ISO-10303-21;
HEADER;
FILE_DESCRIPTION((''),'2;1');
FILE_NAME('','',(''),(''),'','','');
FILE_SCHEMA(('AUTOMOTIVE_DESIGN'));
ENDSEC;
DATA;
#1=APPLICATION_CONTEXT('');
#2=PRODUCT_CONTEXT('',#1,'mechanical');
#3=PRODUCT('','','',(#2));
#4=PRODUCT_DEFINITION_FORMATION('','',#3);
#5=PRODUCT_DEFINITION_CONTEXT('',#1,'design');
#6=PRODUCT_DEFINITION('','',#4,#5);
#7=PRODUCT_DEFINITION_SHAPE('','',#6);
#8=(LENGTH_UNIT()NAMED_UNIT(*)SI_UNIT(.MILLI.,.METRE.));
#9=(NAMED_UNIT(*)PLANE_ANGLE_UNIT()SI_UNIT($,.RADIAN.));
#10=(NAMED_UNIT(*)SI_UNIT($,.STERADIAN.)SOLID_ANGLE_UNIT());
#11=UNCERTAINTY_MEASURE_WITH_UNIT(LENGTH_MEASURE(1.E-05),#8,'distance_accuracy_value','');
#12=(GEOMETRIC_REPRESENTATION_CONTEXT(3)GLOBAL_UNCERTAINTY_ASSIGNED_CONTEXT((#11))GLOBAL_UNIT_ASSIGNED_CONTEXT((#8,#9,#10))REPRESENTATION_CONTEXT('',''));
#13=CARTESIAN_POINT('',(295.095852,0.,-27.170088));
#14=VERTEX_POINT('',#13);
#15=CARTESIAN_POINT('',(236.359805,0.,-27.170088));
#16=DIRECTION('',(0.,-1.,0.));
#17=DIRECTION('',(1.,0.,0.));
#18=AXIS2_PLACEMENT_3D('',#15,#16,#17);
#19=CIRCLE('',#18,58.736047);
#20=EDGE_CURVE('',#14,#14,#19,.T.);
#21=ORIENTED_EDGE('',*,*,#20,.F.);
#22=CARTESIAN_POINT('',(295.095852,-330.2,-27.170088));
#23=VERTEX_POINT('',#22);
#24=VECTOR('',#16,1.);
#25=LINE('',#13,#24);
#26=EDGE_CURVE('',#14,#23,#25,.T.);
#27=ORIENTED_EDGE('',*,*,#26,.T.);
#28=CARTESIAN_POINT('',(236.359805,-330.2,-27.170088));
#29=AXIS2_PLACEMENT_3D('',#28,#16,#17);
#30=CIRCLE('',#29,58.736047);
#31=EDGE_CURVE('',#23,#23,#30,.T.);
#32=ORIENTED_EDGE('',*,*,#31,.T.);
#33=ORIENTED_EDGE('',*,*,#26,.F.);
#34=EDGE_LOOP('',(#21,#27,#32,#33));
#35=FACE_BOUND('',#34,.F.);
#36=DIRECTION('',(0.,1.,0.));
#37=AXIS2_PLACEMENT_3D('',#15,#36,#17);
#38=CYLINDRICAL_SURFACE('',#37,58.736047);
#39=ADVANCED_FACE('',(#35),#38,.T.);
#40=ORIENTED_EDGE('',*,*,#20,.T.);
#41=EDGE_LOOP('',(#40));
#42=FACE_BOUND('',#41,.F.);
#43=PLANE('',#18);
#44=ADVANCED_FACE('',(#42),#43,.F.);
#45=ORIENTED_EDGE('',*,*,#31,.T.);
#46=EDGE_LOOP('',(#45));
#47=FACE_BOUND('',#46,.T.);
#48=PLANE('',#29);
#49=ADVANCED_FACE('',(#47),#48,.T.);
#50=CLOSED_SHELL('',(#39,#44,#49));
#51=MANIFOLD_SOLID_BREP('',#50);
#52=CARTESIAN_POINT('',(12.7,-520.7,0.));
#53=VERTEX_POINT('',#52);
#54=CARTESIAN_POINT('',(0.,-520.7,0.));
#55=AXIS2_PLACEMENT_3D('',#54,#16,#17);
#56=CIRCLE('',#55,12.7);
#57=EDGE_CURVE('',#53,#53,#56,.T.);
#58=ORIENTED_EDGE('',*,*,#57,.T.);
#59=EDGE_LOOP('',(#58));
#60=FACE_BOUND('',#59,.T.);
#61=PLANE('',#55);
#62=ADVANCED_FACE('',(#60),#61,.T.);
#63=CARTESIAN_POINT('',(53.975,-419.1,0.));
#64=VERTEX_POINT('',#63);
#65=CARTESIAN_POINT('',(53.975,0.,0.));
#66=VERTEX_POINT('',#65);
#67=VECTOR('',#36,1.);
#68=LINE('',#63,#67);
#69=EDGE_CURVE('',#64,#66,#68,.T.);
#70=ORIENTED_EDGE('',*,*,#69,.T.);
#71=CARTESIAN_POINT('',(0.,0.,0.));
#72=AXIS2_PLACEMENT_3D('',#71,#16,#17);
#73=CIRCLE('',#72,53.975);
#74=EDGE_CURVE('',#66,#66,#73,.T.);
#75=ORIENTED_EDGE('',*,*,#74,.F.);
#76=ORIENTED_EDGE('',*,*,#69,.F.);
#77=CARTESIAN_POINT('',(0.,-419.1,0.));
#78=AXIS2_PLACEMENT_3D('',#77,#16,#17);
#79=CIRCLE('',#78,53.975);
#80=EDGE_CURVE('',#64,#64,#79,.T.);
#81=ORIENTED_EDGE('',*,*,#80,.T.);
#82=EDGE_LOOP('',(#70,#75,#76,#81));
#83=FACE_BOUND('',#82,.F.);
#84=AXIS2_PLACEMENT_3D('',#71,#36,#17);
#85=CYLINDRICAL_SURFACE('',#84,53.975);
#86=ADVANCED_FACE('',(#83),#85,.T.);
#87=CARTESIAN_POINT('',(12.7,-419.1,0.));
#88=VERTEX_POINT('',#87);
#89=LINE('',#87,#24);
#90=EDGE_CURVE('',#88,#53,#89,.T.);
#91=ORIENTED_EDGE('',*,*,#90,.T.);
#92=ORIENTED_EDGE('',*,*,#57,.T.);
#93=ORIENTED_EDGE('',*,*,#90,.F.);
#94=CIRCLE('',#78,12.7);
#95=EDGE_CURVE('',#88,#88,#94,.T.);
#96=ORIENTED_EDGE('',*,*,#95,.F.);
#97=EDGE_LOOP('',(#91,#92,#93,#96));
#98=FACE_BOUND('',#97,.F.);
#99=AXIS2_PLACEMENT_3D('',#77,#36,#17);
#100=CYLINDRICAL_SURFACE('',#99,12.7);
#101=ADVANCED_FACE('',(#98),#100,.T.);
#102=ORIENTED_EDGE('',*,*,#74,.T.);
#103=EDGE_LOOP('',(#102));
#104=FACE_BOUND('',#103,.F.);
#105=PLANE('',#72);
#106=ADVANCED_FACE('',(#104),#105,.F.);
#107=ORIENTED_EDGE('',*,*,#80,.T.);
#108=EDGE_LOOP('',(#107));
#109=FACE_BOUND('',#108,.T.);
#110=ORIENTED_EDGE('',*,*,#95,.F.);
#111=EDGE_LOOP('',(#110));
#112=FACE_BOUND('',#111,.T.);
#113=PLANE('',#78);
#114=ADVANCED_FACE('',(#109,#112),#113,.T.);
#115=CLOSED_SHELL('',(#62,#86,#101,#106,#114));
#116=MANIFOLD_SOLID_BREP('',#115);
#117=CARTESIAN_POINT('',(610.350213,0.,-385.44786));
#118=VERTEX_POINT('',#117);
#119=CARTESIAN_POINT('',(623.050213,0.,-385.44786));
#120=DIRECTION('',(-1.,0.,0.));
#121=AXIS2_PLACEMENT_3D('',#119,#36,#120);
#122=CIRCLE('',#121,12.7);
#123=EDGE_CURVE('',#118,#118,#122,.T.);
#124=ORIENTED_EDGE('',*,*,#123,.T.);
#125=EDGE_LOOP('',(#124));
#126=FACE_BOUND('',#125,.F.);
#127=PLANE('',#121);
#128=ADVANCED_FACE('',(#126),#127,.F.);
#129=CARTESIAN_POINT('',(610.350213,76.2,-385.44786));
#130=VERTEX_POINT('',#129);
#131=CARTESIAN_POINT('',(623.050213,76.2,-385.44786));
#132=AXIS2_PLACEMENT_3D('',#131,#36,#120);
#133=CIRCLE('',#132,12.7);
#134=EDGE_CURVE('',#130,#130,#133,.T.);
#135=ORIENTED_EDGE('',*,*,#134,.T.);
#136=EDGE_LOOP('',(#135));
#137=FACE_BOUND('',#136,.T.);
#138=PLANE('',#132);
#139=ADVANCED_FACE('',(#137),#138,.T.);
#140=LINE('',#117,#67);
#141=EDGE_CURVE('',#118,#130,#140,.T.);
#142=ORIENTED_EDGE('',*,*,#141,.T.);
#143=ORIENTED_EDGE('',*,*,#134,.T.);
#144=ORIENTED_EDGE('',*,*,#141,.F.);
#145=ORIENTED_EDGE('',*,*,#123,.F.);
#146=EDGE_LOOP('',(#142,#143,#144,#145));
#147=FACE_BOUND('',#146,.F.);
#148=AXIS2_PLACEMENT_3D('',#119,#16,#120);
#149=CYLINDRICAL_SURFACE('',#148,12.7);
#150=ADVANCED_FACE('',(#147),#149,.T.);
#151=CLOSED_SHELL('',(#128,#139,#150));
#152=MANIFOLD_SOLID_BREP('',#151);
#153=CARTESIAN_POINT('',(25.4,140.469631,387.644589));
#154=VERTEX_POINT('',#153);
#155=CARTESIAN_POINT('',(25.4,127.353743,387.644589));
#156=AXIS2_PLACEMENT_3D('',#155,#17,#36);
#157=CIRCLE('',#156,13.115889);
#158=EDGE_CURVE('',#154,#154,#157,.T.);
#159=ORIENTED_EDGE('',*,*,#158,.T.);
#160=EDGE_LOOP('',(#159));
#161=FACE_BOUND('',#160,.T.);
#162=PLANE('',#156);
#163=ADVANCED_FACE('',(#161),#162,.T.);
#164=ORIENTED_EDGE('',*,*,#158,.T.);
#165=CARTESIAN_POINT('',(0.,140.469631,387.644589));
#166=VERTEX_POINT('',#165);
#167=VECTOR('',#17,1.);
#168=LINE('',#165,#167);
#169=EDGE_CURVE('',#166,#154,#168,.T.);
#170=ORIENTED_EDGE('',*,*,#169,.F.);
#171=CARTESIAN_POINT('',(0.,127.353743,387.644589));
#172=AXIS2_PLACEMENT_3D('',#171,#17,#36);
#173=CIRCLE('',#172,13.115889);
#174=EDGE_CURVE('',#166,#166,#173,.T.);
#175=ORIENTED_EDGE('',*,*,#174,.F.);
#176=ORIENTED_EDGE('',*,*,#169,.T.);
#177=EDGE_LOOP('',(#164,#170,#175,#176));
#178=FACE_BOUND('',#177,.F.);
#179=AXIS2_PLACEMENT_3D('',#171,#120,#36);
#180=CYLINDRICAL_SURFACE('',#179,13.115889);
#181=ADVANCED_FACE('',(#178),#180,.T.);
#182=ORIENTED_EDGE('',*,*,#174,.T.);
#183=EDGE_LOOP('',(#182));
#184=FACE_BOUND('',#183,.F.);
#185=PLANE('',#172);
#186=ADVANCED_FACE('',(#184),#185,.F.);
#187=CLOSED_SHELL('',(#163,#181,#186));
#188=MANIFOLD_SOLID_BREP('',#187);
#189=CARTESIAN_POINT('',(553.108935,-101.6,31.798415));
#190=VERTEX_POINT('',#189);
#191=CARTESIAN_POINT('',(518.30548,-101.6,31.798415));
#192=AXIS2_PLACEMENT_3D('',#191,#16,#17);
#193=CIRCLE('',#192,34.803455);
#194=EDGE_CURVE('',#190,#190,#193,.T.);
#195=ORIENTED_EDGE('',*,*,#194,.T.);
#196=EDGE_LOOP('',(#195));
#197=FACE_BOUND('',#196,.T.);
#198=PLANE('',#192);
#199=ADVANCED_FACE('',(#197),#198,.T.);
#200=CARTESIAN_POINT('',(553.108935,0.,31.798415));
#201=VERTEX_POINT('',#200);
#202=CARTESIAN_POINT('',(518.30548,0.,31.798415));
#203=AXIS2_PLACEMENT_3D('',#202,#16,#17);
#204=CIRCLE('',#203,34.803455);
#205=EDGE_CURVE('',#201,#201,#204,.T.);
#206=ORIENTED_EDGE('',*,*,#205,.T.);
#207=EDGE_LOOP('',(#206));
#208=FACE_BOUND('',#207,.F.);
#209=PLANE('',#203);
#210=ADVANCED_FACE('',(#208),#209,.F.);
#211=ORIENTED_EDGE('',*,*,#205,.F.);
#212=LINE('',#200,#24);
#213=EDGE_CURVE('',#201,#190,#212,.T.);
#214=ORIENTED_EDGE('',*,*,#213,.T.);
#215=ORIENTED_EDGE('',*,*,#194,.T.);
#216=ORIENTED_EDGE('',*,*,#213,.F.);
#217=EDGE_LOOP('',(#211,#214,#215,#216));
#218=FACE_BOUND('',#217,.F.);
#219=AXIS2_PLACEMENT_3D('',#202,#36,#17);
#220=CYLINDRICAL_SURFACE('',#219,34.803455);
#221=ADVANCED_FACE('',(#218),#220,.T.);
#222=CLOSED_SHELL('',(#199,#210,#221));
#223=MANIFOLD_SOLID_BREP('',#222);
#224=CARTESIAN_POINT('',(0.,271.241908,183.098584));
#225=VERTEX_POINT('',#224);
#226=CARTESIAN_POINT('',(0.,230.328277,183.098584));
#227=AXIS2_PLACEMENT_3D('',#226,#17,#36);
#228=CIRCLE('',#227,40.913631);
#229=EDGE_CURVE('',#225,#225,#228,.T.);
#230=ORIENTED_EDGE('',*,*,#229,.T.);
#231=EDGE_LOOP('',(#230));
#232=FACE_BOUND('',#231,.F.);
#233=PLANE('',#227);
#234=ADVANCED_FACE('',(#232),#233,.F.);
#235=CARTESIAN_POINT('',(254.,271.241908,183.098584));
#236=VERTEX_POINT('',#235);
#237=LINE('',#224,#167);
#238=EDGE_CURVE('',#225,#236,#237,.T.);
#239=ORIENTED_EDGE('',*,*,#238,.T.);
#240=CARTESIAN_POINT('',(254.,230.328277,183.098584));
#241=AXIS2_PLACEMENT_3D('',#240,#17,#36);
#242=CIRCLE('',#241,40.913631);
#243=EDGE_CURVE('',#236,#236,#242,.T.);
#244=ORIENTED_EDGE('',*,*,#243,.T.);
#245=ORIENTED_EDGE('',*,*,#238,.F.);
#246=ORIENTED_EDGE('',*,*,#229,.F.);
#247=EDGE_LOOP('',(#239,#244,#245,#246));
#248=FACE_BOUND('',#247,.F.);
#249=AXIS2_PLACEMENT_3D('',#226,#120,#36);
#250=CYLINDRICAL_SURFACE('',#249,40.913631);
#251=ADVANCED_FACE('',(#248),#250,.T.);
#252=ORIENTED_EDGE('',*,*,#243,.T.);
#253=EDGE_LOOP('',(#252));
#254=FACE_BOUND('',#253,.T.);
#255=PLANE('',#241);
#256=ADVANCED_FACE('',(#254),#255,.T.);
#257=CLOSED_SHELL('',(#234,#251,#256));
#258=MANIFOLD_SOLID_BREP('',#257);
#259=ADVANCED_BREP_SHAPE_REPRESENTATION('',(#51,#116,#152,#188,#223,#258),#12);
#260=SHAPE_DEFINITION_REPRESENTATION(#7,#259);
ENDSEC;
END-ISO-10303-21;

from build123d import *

# Parameters (mm, degrees)
F0_R      = 53.975
F1_DEPTH  = 419.1
F2_R      = 12.7
F3_DEPTH  = 101.6
F4_R      = 40.9136311109
F5_DEPTH  = 254
F6_R      = 13.1158886666
F7_DEPTH  = 25.4
F8_DEPTH  = 25.4
F9_R      = 12.7
F10_DEPTH = 76.2
F11_R     = 34.8034548998
F12_DEPTH = 101.6
F13_R     = 58.7360473688
F15_DEPTH = 330.2


# Not quite as in the source:
# - a feature names something its author has since deleted; it is built from what else it names
# - the program builds the solid bodies; features that only make, move or delete a surface that nothing else refers to are left out


with BuildPart() as f1:
    # F0 (on Front) → F1 (new body)
    with BuildSketch(Plane.XZ):
        Circle(F0_R)
    extrude(amount=F1_DEPTH)

    # F2 (on face) → F3 (join)
    with BuildSketch(Plane.XZ.offset(419.1)):
        Circle(F2_R)
    extrude(amount=F3_DEPTH)

    # F0 (on Front) → F8 (join)
    with BuildSketch(Plane.XZ):
        Circle(F0_R)
    extrude(amount=F8_DEPTH)


with BuildPart() as f5:
    # F4 (on Right) → F5 (new body)
    with BuildSketch(Plane.YZ):
        with Locations((230.3282767534, 183.0985844135)):
            Circle(F4_R)
    extrude(amount=F5_DEPTH)


with BuildPart() as f7:
    # F6 (on Right) → F7 (new body)
    with BuildSketch(Plane.YZ):
        with Locations((127.3537427187, 387.6445889473)):
            Circle(F6_R)
    extrude(amount=F7_DEPTH)


with BuildPart() as f10:
    # F9 (on face) → F10 (new body)
    with BuildSketch(Plane(origin=(0, 0, 0), x_dir=(-1, 0, 0), z_dir=(0, 1, 0))):
        with Locations((-623.0502128601, -385.4478597641)):
            Circle(F9_R)
    extrude(amount=F10_DEPTH)


with BuildPart() as f12:
    # F11 (on Front) → F12 (new body)
    with BuildSketch(Plane.XZ):
        with Locations((518.3054804802, 31.798414886)):
            Circle(F11_R)
    extrude(amount=F12_DEPTH)


with BuildPart() as f15:
    # F13 (on Front) → F15 (new body)
    with BuildSketch(Plane.XZ):
        with Locations((236.3598048687, -27.1700881422)):
            Circle(F13_R)
    extrude(amount=F15_DEPTH)


solid = Compound([f1.part, f5.part, f7.part, f10.part, f12.part, f15.part])
